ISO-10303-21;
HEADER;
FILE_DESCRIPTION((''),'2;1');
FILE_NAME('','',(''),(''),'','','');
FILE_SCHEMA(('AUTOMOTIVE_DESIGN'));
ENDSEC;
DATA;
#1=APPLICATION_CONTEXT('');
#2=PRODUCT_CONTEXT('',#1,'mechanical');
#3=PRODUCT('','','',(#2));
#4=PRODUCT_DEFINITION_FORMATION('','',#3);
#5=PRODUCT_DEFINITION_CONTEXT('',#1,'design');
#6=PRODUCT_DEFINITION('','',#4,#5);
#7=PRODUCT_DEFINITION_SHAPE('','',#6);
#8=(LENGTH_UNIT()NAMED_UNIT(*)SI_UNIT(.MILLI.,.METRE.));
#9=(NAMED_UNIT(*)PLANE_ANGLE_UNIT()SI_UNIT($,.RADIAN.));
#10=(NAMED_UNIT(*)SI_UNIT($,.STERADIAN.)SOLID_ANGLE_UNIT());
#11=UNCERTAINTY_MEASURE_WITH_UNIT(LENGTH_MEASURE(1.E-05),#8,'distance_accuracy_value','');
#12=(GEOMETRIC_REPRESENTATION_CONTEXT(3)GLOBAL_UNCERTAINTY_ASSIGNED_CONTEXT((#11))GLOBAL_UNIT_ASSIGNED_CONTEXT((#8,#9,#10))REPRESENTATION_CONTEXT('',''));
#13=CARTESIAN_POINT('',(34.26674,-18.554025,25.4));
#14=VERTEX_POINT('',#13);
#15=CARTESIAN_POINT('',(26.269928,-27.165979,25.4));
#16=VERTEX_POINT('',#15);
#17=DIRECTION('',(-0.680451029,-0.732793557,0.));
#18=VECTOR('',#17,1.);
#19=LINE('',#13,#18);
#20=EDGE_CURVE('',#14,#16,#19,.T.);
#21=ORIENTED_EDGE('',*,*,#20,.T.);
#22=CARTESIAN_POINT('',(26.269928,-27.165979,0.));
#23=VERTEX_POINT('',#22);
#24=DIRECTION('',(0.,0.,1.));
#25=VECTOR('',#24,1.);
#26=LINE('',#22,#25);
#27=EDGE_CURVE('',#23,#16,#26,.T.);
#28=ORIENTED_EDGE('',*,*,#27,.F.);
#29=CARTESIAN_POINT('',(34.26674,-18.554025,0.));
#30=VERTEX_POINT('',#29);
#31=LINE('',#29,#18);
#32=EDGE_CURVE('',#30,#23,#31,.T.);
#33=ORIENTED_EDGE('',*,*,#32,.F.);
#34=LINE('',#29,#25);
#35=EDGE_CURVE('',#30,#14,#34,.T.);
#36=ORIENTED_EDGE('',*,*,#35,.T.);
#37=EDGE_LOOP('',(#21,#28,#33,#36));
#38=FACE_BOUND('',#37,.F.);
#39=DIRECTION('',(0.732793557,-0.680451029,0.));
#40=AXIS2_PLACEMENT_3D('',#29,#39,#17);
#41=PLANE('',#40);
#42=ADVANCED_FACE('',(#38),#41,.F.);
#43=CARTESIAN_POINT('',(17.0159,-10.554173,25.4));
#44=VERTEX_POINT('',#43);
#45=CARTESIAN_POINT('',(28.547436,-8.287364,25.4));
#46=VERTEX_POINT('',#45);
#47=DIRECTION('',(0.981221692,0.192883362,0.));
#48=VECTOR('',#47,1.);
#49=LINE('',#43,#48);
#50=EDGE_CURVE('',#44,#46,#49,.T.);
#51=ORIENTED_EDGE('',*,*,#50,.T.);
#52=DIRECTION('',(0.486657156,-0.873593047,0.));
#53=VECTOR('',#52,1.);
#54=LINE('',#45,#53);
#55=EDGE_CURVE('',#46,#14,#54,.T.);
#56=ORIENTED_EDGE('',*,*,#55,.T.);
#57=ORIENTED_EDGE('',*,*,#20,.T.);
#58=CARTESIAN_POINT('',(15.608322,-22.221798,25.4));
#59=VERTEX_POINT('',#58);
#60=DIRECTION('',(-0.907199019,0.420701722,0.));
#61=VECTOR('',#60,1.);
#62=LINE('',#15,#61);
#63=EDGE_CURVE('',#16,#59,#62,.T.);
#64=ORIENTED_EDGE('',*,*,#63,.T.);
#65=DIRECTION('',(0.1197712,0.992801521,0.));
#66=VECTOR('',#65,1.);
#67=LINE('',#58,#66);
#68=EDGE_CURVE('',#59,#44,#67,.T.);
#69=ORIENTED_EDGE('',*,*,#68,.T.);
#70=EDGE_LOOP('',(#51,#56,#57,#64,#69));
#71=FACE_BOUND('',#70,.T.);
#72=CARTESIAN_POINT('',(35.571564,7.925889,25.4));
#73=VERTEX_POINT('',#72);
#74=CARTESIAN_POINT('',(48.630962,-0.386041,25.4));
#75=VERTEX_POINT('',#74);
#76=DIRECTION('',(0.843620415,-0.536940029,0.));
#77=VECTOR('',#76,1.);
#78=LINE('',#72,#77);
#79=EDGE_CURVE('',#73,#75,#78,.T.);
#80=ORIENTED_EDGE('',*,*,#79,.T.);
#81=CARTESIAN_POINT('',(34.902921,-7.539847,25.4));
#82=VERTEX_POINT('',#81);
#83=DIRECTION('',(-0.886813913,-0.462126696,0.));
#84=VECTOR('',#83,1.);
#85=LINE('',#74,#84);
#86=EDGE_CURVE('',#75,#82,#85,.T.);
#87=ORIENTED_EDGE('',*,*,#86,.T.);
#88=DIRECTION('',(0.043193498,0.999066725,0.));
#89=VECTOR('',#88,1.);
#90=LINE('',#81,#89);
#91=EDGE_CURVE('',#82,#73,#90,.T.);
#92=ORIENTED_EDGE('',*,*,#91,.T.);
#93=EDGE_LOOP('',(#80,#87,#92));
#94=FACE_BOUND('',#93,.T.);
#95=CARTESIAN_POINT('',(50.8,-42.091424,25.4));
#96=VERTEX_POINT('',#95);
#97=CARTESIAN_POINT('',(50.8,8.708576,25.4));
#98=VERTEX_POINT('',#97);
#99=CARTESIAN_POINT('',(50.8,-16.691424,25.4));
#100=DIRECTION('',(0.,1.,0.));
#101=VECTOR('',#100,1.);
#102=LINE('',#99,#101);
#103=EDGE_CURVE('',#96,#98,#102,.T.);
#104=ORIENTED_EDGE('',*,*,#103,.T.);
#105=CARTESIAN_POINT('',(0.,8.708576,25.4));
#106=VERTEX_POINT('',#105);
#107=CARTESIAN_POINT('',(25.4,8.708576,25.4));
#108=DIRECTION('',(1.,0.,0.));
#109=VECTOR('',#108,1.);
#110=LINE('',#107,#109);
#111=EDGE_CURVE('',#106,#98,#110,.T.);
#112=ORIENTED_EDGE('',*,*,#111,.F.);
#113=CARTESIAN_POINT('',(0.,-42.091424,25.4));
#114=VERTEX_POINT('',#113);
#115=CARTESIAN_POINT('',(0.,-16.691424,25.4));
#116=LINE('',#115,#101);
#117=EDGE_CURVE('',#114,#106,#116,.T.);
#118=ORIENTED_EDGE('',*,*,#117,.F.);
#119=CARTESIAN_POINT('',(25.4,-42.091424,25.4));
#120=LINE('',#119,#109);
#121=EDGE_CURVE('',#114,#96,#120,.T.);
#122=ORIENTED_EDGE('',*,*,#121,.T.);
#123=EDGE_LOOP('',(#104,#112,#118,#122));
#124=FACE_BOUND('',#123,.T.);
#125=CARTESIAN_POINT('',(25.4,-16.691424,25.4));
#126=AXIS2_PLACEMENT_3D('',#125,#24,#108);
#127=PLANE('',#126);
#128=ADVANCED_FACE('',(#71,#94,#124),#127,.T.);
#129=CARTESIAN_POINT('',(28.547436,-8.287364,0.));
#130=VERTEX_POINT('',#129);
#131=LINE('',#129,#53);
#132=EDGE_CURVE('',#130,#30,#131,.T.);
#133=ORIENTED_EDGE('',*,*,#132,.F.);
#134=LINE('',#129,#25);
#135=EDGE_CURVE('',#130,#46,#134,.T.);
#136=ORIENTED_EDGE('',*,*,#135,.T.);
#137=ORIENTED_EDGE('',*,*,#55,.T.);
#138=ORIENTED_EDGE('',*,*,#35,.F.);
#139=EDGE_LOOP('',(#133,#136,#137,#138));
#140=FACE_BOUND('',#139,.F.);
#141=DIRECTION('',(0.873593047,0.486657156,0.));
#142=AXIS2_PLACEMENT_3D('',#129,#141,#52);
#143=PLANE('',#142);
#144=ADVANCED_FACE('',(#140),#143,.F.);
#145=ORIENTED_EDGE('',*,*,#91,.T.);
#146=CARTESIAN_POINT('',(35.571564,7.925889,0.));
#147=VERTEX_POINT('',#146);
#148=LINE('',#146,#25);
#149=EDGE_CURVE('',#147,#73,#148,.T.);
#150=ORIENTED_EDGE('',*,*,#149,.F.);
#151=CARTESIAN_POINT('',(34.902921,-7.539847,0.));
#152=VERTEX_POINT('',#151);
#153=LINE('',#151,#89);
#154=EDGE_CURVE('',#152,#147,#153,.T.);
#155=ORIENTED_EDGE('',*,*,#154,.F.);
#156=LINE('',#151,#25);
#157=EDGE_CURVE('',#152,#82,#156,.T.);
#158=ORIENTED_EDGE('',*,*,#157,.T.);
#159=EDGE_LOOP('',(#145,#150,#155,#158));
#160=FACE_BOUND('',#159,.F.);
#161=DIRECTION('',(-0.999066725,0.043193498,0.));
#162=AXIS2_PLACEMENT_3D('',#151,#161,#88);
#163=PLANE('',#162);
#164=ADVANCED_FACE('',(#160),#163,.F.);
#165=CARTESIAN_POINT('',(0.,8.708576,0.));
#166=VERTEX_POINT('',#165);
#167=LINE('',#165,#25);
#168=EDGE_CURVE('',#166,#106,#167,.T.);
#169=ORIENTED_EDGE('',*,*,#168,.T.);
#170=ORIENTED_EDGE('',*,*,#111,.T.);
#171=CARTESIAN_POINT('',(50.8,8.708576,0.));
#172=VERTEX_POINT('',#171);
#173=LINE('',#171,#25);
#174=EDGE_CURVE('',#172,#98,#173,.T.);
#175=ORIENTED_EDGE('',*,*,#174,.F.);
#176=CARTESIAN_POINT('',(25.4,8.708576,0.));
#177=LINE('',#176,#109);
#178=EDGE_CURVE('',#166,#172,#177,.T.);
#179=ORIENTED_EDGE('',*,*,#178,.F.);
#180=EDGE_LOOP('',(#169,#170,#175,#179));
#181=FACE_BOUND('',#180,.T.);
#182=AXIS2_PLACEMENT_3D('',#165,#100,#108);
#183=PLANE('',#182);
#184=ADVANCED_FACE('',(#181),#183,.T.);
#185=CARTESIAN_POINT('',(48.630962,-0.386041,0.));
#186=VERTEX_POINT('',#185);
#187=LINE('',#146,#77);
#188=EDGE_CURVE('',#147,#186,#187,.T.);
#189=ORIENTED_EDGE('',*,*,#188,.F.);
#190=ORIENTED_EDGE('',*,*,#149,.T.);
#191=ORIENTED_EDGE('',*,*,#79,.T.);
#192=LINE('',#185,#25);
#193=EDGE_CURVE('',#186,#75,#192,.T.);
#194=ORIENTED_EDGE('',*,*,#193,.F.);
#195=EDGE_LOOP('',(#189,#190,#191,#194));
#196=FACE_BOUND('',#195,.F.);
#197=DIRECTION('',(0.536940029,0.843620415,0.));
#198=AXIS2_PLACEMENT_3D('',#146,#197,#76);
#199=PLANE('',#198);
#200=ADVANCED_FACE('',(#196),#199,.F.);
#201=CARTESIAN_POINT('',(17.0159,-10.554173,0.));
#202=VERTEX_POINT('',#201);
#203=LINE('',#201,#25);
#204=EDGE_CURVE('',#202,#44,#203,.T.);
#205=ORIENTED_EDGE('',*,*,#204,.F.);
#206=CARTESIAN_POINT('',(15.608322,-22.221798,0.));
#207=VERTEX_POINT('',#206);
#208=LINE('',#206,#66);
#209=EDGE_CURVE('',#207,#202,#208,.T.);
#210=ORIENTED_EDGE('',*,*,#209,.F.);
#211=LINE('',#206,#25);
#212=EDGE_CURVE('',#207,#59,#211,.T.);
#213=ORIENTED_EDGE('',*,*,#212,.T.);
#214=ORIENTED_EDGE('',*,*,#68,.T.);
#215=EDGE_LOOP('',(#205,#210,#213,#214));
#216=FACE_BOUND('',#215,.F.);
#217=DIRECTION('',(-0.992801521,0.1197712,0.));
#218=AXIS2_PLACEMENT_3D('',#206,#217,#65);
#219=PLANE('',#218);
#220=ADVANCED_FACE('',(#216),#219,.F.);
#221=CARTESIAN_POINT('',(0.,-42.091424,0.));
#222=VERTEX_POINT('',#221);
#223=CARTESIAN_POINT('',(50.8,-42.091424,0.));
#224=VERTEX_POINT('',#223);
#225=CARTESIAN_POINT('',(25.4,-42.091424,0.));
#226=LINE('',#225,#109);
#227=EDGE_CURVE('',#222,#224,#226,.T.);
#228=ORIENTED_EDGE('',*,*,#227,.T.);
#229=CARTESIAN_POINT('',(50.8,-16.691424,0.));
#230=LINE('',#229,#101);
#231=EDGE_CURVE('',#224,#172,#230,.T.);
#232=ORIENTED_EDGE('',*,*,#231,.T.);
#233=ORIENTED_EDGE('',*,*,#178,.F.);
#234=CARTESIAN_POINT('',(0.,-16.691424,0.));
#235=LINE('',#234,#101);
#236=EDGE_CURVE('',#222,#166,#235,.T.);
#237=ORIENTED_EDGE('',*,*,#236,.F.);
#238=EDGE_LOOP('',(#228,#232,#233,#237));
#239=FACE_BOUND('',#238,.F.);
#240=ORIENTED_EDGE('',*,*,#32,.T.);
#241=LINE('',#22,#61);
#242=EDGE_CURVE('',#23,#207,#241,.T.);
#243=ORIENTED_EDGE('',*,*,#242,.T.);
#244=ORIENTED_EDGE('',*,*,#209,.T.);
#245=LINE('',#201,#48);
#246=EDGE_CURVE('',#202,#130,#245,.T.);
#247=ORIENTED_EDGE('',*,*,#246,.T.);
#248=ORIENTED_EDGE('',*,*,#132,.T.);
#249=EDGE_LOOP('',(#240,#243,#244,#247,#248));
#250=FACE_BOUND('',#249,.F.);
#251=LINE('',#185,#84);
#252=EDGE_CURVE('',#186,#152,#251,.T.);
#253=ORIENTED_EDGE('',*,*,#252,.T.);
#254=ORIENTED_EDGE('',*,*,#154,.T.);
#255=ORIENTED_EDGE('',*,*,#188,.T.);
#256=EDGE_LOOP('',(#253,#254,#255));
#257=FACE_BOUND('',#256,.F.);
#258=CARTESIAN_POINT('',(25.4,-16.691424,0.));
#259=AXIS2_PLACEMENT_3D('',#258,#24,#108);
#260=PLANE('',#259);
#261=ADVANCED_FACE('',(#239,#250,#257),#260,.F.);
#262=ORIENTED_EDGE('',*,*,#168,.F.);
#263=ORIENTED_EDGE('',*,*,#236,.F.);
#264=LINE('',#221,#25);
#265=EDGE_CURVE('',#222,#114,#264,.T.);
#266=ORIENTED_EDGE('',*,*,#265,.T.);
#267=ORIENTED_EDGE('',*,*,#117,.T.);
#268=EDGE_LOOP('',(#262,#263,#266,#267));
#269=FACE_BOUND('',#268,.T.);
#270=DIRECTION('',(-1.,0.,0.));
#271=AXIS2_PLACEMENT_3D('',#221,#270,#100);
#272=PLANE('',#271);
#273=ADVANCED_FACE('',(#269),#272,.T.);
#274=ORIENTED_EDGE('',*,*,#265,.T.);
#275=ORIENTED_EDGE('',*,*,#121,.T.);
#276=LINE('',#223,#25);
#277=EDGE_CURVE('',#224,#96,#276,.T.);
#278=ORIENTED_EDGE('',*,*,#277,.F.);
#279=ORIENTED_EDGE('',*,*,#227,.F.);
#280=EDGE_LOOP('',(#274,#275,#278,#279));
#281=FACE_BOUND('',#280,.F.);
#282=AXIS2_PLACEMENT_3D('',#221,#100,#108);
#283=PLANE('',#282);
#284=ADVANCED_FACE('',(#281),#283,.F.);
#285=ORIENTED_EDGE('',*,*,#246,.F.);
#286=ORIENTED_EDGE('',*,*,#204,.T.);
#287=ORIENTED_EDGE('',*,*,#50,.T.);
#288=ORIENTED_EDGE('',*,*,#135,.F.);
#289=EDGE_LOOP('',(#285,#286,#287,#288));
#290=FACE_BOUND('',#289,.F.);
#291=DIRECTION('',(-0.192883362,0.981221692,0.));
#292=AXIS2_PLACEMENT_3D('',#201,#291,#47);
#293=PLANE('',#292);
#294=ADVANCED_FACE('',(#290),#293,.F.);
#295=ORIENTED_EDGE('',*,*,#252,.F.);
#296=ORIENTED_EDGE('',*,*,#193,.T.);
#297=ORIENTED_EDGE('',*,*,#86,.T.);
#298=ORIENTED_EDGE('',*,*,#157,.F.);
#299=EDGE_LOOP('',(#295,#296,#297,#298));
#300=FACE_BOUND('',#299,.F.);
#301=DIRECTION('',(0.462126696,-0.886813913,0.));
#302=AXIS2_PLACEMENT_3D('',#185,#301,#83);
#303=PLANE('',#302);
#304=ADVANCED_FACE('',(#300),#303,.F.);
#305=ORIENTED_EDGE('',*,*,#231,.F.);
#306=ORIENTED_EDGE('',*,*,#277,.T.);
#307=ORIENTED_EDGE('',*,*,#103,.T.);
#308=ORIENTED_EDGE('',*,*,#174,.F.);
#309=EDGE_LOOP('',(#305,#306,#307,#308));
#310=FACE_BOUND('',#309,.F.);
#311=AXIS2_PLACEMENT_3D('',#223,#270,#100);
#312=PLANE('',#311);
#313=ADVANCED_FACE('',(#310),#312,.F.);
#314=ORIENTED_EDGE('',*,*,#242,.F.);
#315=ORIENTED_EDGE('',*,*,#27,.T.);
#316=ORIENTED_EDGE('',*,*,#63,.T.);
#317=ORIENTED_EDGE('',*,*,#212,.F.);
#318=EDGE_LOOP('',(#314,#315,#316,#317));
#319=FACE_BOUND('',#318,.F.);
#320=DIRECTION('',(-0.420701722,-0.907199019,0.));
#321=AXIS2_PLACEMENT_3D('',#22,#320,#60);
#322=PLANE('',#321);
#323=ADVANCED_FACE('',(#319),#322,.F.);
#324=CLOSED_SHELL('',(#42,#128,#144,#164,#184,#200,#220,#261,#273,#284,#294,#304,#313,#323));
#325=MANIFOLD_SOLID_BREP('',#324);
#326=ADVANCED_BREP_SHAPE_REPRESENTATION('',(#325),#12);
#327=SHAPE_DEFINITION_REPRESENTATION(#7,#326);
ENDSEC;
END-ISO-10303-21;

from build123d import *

# Parameters (mm, degrees)
F0_W     = 50.8
F0_H     = 50.8
F1_DEPTH = 25.4
F2_DEPTH = 25.4


# Not quite as in the source:
# - a feature names something its author has since deleted; it is built from what else it names


with BuildPart() as f1:
    # F0 (on Top) → F1 (new body)
    with BuildSketch(Plane.XY):
        with Locations((25.4, -16.6914236449)):
            Rectangle(F0_W, F0_H)
        Polygon((28.5474364771, -8.2873642427), (34.2667401254, -18.5540249534), (26.2699275792, -27.1659785919), (15.6083219757, -22.2217979392), (17.0158998843, -10.5541726109), align=None, mode=Mode.SUBTRACT)
        Polygon((35.5715639889, 7.9258885235), (48.6309623563, -0.3860413606), (34.9029207385, -7.5398471628), align=None, mode=Mode.SUBTRACT)
    extrude(amount=F1_DEPTH)

    # F0 (on Top) → F2 (join)
    with BuildSketch(Plane.XY):
        with Locations((25.4, -16.6914236449)):
            Rectangle(F0_W, F0_H)
        Polygon((28.5474364771, -8.2873642427), (34.2667401254, -18.5540249534), (26.2699275792, -27.1659785919), (15.6083219757, -22.2217979392), (17.0158998843, -10.5541726109), align=None, mode=Mode.SUBTRACT)
        Polygon((35.5715639889, 7.9258885235), (48.6309623563, -0.3860413606), (34.9029207385, -7.5398471628), align=None, mode=Mode.SUBTRACT)
    extrude(amount=F2_DEPTH)


solid = f1.part
